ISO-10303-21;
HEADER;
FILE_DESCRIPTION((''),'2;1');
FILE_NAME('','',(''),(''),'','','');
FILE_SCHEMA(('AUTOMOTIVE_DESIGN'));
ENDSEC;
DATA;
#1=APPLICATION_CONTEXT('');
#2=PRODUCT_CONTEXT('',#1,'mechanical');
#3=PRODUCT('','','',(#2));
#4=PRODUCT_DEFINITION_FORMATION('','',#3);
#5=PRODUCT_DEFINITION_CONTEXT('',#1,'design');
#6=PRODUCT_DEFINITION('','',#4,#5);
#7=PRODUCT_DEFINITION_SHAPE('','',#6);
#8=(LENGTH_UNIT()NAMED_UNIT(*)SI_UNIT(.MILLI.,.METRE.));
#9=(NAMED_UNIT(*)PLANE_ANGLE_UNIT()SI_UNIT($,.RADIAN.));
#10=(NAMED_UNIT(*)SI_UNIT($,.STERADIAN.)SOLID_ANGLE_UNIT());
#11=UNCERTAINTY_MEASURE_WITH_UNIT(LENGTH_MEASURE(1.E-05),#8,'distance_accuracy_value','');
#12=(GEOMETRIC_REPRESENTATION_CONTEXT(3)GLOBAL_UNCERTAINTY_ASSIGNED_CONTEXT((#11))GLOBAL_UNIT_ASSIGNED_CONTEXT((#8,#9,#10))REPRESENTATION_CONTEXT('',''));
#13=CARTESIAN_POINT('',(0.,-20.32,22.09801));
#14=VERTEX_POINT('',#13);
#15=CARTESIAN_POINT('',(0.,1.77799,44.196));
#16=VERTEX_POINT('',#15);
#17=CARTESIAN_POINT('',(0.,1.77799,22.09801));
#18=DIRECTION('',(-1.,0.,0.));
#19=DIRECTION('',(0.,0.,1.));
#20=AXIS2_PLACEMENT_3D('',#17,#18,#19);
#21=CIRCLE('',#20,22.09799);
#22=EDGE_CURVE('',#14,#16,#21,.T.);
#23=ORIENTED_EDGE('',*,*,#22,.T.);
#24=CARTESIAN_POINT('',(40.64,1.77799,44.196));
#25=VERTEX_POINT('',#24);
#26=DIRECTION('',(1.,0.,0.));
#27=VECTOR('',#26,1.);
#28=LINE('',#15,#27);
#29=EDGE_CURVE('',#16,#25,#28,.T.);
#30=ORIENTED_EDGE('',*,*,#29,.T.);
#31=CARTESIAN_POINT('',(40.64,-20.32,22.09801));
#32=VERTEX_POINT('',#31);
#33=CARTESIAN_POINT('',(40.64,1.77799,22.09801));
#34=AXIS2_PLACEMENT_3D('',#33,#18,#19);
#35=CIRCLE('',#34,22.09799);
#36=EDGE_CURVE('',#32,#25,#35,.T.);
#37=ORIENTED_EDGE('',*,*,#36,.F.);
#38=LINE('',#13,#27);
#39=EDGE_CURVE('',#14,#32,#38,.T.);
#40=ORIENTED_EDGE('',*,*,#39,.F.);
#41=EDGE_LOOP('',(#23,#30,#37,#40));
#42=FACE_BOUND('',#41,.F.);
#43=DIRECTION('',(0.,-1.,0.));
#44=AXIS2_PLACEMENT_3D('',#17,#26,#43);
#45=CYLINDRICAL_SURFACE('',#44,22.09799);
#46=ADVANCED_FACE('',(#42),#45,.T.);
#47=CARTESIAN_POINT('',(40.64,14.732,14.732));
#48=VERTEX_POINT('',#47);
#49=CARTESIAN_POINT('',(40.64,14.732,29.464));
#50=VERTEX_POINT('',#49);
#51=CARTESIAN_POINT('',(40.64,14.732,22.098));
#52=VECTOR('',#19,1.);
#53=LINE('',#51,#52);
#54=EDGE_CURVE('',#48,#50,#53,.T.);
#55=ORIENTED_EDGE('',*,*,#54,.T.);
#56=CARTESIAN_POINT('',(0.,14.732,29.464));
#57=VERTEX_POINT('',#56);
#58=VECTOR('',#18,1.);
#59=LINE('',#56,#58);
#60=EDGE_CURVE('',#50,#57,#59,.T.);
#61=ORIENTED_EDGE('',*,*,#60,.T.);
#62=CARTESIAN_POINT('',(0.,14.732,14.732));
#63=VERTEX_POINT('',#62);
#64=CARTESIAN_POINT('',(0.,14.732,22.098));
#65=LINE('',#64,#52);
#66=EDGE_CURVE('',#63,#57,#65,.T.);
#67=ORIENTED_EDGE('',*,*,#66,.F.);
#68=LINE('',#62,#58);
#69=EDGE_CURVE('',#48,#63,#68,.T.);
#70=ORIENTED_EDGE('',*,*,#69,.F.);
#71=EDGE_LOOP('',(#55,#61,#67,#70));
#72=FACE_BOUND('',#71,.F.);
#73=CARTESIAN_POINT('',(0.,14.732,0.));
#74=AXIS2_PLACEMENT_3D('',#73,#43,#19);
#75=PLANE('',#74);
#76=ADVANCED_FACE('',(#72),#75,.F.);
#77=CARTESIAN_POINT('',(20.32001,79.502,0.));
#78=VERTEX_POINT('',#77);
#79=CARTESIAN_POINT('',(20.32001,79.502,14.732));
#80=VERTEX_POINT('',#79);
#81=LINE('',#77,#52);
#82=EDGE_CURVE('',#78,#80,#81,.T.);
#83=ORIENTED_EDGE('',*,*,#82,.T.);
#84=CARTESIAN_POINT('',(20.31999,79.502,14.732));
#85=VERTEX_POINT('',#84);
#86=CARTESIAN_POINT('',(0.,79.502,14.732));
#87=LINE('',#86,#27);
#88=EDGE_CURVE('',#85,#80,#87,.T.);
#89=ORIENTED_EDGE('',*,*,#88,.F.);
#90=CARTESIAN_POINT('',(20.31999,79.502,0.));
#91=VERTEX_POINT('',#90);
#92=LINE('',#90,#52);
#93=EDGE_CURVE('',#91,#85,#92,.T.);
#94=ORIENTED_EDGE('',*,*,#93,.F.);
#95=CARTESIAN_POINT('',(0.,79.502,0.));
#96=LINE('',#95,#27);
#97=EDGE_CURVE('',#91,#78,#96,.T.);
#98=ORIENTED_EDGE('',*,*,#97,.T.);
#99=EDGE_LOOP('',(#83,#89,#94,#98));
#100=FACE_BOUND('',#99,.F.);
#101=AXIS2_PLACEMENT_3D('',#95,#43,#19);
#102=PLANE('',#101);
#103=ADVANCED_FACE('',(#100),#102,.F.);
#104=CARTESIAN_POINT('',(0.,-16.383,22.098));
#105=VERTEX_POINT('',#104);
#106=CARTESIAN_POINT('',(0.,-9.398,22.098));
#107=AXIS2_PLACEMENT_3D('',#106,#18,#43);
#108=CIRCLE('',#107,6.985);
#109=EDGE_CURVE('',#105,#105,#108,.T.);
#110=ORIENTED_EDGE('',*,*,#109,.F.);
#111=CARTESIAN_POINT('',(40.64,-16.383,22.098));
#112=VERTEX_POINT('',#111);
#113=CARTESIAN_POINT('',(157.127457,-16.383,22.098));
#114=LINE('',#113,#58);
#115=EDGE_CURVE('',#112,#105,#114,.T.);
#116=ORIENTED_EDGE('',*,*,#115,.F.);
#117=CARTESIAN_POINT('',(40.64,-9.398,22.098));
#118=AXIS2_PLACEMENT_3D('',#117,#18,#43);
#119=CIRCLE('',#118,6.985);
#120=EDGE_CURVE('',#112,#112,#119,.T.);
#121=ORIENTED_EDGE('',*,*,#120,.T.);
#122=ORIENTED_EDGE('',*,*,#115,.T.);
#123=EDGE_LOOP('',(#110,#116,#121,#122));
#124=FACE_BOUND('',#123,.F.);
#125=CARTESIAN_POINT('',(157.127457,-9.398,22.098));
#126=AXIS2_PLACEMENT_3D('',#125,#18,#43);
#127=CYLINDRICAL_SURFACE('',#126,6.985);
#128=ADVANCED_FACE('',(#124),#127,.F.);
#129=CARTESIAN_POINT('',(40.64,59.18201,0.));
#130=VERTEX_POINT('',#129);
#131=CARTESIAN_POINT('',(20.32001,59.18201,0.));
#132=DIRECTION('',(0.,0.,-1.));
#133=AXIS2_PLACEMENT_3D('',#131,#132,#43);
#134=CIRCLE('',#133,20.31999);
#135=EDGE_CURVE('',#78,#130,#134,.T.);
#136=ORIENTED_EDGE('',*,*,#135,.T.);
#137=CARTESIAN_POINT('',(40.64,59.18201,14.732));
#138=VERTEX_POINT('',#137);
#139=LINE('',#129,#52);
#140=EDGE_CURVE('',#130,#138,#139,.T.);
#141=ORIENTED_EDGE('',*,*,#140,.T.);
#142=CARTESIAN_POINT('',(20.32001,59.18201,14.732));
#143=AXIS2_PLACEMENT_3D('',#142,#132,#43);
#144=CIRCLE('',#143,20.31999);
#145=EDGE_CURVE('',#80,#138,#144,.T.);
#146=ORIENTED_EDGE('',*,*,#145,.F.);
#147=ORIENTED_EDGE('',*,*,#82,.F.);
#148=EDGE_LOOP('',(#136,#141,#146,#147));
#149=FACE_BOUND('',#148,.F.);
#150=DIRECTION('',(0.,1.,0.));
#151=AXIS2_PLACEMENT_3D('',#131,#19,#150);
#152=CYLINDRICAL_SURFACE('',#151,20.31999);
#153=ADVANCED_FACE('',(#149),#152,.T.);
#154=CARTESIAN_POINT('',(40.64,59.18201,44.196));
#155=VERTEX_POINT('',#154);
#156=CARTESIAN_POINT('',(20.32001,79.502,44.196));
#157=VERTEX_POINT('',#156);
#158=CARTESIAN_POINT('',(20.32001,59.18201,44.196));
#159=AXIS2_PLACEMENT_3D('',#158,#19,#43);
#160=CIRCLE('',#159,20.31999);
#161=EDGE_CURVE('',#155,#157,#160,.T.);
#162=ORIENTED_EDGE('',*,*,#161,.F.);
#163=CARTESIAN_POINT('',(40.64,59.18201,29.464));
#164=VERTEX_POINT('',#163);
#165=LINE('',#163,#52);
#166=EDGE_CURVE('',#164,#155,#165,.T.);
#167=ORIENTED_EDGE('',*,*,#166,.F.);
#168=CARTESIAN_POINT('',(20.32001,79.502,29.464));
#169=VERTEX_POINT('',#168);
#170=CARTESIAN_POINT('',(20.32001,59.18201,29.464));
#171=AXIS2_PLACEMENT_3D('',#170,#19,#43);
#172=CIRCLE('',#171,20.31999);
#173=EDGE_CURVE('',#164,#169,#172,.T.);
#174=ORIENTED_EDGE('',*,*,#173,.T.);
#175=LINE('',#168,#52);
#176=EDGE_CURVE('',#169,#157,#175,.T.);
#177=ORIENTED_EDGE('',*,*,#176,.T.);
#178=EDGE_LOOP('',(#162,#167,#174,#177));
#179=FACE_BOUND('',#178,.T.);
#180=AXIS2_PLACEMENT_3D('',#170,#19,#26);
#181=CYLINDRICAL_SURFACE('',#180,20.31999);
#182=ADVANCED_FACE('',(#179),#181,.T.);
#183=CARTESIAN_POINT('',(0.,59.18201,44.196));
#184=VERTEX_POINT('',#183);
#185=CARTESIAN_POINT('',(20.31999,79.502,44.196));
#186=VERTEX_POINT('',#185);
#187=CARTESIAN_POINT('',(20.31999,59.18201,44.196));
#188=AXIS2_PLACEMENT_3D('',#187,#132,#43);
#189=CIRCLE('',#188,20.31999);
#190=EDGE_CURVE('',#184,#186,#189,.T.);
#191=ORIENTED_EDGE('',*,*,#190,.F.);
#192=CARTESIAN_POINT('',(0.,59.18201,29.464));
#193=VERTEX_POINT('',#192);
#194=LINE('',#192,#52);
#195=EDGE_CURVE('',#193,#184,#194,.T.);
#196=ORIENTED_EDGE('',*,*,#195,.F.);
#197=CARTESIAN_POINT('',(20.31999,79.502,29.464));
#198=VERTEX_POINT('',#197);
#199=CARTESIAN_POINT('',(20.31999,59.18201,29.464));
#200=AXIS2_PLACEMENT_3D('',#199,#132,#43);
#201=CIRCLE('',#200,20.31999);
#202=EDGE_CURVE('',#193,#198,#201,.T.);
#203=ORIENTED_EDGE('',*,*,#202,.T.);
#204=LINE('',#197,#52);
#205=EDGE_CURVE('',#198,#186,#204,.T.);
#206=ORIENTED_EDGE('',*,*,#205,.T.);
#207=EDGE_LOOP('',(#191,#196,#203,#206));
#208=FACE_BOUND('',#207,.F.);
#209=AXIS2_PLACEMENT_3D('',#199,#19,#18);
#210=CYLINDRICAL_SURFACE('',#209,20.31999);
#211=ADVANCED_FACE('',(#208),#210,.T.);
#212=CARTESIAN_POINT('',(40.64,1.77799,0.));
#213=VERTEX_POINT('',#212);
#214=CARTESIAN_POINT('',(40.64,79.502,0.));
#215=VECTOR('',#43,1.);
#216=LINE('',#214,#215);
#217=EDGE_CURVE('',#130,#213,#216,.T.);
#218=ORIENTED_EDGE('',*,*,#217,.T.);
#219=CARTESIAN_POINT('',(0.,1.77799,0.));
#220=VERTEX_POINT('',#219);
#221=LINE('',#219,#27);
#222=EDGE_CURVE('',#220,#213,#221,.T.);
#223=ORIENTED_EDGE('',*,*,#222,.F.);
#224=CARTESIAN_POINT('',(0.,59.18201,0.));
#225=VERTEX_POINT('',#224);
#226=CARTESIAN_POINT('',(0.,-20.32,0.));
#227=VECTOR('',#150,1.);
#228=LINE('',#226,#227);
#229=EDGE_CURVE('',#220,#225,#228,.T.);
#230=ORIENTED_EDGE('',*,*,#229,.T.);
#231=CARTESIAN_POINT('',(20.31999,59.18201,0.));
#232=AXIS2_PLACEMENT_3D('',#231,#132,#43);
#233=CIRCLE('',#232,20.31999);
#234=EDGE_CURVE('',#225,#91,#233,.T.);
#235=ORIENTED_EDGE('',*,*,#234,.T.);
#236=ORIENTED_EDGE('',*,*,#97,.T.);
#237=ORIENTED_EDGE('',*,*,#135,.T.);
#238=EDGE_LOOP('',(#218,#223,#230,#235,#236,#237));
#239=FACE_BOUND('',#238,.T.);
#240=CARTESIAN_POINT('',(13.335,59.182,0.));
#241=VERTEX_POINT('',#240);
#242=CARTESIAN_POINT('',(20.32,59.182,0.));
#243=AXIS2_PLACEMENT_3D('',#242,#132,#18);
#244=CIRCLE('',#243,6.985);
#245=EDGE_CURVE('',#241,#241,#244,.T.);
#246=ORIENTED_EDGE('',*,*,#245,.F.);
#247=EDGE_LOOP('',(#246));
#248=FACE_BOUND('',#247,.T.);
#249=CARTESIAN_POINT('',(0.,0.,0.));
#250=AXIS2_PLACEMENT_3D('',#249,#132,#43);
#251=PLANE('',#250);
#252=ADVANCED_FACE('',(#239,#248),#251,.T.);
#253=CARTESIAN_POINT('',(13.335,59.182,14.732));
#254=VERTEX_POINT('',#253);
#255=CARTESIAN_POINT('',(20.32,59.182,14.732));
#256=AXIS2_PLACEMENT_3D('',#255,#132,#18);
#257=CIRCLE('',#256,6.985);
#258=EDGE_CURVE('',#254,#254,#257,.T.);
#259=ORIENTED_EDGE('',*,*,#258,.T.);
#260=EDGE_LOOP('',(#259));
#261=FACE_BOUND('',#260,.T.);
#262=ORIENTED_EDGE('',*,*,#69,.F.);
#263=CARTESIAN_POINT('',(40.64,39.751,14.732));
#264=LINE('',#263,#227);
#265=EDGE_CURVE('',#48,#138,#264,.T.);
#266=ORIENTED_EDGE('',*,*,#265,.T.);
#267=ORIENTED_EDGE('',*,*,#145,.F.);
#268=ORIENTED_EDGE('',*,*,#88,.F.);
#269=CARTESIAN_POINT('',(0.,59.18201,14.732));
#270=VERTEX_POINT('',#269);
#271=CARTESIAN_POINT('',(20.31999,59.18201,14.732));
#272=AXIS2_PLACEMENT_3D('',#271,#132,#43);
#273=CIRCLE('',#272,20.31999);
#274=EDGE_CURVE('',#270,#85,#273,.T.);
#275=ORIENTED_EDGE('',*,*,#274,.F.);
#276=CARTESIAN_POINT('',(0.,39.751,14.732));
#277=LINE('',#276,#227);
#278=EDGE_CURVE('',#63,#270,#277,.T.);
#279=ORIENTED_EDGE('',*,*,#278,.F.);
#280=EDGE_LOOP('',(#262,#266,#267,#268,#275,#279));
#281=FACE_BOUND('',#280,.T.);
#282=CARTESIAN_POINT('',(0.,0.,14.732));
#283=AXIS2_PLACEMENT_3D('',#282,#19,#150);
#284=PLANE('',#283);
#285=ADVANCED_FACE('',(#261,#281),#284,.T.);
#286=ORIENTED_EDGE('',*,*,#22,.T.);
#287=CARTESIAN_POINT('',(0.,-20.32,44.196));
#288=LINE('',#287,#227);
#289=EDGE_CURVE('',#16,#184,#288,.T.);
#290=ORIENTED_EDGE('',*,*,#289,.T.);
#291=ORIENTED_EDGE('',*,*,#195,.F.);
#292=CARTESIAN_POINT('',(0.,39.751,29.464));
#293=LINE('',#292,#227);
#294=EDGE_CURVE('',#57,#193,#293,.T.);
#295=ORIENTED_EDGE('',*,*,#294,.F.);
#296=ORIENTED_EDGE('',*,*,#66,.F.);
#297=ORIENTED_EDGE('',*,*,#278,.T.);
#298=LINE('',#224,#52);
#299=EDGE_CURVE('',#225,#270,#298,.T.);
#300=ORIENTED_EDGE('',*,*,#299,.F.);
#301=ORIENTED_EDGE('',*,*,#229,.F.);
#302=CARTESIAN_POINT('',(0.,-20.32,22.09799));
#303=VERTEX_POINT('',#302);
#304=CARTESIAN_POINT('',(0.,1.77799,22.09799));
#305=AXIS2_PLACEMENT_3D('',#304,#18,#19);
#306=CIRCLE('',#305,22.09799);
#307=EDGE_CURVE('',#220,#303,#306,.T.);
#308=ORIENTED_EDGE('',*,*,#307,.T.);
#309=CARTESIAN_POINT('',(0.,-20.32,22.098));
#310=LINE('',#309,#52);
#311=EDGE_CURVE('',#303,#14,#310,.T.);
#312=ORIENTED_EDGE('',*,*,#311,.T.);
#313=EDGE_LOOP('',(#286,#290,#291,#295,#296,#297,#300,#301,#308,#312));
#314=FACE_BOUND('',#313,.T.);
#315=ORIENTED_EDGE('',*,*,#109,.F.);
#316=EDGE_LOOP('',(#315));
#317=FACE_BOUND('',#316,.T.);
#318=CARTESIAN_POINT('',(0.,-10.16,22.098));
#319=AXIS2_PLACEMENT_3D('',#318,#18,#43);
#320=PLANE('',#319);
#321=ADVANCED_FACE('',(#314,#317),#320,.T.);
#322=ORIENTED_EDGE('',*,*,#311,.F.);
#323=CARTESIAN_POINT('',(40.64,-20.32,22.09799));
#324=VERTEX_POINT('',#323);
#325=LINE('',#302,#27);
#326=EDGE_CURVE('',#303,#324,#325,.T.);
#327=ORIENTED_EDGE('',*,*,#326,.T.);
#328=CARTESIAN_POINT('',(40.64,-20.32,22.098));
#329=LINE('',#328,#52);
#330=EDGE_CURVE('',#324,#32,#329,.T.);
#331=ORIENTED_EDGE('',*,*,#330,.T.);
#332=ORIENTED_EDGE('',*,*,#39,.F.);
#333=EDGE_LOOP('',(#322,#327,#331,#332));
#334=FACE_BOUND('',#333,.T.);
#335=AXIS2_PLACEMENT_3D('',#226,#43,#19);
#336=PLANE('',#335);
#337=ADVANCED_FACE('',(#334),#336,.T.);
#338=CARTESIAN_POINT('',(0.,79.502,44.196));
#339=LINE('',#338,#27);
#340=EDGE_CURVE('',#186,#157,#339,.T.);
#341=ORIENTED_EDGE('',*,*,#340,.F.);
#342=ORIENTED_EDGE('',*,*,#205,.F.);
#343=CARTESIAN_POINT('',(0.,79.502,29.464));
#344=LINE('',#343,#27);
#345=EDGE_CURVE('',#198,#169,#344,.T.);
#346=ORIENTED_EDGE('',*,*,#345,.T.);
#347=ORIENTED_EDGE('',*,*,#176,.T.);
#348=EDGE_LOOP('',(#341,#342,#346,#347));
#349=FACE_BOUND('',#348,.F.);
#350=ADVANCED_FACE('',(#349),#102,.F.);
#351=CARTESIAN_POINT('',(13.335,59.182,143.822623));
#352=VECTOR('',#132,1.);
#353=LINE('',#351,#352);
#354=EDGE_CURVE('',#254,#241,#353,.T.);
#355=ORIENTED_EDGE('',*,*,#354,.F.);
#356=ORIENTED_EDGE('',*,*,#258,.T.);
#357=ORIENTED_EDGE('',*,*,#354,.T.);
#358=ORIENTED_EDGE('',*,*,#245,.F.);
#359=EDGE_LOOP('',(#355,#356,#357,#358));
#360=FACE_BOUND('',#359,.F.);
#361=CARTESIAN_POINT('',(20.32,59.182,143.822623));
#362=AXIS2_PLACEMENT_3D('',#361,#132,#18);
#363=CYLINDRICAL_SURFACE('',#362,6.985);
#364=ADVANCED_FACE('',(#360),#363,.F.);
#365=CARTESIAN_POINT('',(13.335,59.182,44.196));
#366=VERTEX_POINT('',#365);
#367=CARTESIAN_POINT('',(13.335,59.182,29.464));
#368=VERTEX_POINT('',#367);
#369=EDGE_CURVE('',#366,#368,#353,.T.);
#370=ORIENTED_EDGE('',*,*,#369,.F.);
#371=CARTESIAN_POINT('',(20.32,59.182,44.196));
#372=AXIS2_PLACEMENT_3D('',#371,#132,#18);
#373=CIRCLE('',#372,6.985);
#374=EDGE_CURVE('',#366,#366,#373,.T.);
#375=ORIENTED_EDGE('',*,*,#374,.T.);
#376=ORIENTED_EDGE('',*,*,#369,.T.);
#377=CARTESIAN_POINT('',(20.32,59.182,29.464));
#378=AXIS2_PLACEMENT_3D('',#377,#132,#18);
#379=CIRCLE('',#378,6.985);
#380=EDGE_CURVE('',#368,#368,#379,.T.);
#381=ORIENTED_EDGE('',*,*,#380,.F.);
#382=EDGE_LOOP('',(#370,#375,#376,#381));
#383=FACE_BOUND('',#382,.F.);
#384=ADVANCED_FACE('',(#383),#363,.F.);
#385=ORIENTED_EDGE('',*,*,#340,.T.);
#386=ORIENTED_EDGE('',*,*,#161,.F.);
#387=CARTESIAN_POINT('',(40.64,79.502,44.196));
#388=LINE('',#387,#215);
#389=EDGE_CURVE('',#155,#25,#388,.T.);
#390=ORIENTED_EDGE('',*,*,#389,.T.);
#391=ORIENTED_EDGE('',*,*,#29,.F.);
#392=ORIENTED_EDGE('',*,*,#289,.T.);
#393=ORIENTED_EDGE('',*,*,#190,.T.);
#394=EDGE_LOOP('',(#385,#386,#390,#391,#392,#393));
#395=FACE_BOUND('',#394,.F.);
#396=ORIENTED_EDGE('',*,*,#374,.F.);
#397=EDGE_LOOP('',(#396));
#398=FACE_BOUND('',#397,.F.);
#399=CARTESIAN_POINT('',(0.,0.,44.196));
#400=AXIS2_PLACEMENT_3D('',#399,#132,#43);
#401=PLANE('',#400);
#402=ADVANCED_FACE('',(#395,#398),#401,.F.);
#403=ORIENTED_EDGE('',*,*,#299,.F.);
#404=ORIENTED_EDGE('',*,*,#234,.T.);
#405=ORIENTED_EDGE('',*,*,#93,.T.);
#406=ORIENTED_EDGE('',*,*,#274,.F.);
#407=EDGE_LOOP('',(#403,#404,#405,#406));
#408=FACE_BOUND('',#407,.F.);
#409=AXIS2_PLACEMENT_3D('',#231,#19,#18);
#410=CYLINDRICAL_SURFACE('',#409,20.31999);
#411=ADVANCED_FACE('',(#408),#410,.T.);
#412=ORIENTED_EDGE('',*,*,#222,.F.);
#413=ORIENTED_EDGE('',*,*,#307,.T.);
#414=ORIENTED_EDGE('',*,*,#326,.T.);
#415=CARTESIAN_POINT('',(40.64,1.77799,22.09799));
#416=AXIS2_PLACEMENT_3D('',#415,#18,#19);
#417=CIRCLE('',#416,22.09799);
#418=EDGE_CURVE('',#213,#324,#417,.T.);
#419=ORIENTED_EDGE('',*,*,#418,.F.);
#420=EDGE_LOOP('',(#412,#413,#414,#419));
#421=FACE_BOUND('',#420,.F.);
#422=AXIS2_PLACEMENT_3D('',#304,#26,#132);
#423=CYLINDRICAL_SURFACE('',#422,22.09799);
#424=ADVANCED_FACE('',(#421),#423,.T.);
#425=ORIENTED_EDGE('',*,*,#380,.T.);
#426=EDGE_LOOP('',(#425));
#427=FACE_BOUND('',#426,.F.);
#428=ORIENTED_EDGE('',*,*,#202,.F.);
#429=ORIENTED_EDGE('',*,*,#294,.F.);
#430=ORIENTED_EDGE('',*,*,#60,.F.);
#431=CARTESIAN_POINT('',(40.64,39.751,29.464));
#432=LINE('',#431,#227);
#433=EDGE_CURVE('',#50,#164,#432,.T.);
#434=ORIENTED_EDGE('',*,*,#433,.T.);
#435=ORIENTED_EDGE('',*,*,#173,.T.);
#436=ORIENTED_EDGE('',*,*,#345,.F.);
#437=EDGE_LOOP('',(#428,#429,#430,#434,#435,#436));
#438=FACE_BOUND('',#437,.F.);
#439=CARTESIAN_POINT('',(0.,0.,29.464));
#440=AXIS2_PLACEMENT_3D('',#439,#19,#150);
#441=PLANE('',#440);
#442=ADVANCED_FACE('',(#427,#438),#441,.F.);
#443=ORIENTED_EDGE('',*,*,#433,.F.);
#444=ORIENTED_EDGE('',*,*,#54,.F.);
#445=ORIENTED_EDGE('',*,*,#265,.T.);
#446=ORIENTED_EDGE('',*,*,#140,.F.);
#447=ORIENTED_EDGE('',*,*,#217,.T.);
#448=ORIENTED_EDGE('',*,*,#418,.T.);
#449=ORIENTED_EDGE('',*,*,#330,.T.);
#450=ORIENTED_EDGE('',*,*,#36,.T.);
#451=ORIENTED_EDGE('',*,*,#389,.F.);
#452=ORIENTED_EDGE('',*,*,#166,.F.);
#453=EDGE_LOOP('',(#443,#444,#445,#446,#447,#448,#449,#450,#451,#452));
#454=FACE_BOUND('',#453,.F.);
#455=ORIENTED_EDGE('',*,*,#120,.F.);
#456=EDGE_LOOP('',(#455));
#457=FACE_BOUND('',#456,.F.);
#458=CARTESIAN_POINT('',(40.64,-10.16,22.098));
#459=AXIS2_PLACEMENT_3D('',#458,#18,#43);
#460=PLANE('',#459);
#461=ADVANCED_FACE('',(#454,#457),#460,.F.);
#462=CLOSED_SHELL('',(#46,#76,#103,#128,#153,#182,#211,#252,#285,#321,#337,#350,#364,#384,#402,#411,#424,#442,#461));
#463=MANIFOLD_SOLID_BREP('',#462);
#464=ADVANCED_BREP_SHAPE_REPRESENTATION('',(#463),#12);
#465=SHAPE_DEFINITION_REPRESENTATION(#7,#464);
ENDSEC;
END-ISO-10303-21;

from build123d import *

# Parameters (mm, degrees)
F0_W     = 79.502
F0_H     = 44.196
F1_DEPTH = 40.64
F3_T     = -14.732
F4_D     = 13.97
F6_W     = 20.32
F6_H     = 44.196
F7_DEPTH = 40.64
F8_D     = 13.97
F9_R     = 22.09799
F10_R    = 20.31999


# Not quite as in the source:
# - a fillet or chamfer is up to 0.001 mm smaller than in the source, because OpenCascade refuses the exact size


with BuildPart() as f1:
    # F0 (on Right) → F1 (new body)
    with BuildSketch(Plane.YZ):
        with Locations((39.751, 22.098)):
            Rectangle(F0_W, F0_H)
    extrude(amount=F1_DEPTH)

    # F3
    f3_openings = [f1.faces().sort_by_distance(p)[0] for p in [
        (40.64, 39.751, 22.098),
        (20.32, 79.502, 22.098),
        (0, 39.751, 22.098),
    ]]
    offset(amount=F3_T, openings=f3_openings)

    # F4 (through all)
    with Locations(Plane.XY.offset(44.196)):
        with Locations((20.32, 59.182)):
            Hole(F4_D / 2)

    # F6 (on face) → F7 (join)
    with BuildSketch(Plane(origin=(0, 0, 0), x_dir=(0, -1, 0), z_dir=(-1, 0, 0))):
        with Locations((10.16, 22.098)):
            Rectangle(F6_W, F6_H)
    extrude(amount=-F7_DEPTH)

    # F8 (through all)
    with Locations(Plane.YZ.offset(40.64)):
        with Locations((-9.398, 22.098)):
            Hole(F8_D / 2)

    # F9 (radius 22.098 in the source; OpenCascade refuses exactly that, so slightly less here)
    f9_edges = [f1.edges().sort_by_distance(p)[0] for p in [
        (20.32, -20.32, 44.196),
        (20.32, -20.32, 0),
    ]]
    fillet(f9_edges, radius=F9_R)

    # F10 (radius 20.32 in the source; OpenCascade refuses exactly that, so slightly less here)
    f10_edges = [f1.edges().sort_by_distance(p)[0] for p in [
        (0, 79.502, 36.83),
        (0, 79.502, 7.366),
        (40.64, 79.502, 7.366),
        (40.64, 79.502, 36.83),
    ]]
    fillet(f10_edges, radius=F10_R)


solid = f1.part
